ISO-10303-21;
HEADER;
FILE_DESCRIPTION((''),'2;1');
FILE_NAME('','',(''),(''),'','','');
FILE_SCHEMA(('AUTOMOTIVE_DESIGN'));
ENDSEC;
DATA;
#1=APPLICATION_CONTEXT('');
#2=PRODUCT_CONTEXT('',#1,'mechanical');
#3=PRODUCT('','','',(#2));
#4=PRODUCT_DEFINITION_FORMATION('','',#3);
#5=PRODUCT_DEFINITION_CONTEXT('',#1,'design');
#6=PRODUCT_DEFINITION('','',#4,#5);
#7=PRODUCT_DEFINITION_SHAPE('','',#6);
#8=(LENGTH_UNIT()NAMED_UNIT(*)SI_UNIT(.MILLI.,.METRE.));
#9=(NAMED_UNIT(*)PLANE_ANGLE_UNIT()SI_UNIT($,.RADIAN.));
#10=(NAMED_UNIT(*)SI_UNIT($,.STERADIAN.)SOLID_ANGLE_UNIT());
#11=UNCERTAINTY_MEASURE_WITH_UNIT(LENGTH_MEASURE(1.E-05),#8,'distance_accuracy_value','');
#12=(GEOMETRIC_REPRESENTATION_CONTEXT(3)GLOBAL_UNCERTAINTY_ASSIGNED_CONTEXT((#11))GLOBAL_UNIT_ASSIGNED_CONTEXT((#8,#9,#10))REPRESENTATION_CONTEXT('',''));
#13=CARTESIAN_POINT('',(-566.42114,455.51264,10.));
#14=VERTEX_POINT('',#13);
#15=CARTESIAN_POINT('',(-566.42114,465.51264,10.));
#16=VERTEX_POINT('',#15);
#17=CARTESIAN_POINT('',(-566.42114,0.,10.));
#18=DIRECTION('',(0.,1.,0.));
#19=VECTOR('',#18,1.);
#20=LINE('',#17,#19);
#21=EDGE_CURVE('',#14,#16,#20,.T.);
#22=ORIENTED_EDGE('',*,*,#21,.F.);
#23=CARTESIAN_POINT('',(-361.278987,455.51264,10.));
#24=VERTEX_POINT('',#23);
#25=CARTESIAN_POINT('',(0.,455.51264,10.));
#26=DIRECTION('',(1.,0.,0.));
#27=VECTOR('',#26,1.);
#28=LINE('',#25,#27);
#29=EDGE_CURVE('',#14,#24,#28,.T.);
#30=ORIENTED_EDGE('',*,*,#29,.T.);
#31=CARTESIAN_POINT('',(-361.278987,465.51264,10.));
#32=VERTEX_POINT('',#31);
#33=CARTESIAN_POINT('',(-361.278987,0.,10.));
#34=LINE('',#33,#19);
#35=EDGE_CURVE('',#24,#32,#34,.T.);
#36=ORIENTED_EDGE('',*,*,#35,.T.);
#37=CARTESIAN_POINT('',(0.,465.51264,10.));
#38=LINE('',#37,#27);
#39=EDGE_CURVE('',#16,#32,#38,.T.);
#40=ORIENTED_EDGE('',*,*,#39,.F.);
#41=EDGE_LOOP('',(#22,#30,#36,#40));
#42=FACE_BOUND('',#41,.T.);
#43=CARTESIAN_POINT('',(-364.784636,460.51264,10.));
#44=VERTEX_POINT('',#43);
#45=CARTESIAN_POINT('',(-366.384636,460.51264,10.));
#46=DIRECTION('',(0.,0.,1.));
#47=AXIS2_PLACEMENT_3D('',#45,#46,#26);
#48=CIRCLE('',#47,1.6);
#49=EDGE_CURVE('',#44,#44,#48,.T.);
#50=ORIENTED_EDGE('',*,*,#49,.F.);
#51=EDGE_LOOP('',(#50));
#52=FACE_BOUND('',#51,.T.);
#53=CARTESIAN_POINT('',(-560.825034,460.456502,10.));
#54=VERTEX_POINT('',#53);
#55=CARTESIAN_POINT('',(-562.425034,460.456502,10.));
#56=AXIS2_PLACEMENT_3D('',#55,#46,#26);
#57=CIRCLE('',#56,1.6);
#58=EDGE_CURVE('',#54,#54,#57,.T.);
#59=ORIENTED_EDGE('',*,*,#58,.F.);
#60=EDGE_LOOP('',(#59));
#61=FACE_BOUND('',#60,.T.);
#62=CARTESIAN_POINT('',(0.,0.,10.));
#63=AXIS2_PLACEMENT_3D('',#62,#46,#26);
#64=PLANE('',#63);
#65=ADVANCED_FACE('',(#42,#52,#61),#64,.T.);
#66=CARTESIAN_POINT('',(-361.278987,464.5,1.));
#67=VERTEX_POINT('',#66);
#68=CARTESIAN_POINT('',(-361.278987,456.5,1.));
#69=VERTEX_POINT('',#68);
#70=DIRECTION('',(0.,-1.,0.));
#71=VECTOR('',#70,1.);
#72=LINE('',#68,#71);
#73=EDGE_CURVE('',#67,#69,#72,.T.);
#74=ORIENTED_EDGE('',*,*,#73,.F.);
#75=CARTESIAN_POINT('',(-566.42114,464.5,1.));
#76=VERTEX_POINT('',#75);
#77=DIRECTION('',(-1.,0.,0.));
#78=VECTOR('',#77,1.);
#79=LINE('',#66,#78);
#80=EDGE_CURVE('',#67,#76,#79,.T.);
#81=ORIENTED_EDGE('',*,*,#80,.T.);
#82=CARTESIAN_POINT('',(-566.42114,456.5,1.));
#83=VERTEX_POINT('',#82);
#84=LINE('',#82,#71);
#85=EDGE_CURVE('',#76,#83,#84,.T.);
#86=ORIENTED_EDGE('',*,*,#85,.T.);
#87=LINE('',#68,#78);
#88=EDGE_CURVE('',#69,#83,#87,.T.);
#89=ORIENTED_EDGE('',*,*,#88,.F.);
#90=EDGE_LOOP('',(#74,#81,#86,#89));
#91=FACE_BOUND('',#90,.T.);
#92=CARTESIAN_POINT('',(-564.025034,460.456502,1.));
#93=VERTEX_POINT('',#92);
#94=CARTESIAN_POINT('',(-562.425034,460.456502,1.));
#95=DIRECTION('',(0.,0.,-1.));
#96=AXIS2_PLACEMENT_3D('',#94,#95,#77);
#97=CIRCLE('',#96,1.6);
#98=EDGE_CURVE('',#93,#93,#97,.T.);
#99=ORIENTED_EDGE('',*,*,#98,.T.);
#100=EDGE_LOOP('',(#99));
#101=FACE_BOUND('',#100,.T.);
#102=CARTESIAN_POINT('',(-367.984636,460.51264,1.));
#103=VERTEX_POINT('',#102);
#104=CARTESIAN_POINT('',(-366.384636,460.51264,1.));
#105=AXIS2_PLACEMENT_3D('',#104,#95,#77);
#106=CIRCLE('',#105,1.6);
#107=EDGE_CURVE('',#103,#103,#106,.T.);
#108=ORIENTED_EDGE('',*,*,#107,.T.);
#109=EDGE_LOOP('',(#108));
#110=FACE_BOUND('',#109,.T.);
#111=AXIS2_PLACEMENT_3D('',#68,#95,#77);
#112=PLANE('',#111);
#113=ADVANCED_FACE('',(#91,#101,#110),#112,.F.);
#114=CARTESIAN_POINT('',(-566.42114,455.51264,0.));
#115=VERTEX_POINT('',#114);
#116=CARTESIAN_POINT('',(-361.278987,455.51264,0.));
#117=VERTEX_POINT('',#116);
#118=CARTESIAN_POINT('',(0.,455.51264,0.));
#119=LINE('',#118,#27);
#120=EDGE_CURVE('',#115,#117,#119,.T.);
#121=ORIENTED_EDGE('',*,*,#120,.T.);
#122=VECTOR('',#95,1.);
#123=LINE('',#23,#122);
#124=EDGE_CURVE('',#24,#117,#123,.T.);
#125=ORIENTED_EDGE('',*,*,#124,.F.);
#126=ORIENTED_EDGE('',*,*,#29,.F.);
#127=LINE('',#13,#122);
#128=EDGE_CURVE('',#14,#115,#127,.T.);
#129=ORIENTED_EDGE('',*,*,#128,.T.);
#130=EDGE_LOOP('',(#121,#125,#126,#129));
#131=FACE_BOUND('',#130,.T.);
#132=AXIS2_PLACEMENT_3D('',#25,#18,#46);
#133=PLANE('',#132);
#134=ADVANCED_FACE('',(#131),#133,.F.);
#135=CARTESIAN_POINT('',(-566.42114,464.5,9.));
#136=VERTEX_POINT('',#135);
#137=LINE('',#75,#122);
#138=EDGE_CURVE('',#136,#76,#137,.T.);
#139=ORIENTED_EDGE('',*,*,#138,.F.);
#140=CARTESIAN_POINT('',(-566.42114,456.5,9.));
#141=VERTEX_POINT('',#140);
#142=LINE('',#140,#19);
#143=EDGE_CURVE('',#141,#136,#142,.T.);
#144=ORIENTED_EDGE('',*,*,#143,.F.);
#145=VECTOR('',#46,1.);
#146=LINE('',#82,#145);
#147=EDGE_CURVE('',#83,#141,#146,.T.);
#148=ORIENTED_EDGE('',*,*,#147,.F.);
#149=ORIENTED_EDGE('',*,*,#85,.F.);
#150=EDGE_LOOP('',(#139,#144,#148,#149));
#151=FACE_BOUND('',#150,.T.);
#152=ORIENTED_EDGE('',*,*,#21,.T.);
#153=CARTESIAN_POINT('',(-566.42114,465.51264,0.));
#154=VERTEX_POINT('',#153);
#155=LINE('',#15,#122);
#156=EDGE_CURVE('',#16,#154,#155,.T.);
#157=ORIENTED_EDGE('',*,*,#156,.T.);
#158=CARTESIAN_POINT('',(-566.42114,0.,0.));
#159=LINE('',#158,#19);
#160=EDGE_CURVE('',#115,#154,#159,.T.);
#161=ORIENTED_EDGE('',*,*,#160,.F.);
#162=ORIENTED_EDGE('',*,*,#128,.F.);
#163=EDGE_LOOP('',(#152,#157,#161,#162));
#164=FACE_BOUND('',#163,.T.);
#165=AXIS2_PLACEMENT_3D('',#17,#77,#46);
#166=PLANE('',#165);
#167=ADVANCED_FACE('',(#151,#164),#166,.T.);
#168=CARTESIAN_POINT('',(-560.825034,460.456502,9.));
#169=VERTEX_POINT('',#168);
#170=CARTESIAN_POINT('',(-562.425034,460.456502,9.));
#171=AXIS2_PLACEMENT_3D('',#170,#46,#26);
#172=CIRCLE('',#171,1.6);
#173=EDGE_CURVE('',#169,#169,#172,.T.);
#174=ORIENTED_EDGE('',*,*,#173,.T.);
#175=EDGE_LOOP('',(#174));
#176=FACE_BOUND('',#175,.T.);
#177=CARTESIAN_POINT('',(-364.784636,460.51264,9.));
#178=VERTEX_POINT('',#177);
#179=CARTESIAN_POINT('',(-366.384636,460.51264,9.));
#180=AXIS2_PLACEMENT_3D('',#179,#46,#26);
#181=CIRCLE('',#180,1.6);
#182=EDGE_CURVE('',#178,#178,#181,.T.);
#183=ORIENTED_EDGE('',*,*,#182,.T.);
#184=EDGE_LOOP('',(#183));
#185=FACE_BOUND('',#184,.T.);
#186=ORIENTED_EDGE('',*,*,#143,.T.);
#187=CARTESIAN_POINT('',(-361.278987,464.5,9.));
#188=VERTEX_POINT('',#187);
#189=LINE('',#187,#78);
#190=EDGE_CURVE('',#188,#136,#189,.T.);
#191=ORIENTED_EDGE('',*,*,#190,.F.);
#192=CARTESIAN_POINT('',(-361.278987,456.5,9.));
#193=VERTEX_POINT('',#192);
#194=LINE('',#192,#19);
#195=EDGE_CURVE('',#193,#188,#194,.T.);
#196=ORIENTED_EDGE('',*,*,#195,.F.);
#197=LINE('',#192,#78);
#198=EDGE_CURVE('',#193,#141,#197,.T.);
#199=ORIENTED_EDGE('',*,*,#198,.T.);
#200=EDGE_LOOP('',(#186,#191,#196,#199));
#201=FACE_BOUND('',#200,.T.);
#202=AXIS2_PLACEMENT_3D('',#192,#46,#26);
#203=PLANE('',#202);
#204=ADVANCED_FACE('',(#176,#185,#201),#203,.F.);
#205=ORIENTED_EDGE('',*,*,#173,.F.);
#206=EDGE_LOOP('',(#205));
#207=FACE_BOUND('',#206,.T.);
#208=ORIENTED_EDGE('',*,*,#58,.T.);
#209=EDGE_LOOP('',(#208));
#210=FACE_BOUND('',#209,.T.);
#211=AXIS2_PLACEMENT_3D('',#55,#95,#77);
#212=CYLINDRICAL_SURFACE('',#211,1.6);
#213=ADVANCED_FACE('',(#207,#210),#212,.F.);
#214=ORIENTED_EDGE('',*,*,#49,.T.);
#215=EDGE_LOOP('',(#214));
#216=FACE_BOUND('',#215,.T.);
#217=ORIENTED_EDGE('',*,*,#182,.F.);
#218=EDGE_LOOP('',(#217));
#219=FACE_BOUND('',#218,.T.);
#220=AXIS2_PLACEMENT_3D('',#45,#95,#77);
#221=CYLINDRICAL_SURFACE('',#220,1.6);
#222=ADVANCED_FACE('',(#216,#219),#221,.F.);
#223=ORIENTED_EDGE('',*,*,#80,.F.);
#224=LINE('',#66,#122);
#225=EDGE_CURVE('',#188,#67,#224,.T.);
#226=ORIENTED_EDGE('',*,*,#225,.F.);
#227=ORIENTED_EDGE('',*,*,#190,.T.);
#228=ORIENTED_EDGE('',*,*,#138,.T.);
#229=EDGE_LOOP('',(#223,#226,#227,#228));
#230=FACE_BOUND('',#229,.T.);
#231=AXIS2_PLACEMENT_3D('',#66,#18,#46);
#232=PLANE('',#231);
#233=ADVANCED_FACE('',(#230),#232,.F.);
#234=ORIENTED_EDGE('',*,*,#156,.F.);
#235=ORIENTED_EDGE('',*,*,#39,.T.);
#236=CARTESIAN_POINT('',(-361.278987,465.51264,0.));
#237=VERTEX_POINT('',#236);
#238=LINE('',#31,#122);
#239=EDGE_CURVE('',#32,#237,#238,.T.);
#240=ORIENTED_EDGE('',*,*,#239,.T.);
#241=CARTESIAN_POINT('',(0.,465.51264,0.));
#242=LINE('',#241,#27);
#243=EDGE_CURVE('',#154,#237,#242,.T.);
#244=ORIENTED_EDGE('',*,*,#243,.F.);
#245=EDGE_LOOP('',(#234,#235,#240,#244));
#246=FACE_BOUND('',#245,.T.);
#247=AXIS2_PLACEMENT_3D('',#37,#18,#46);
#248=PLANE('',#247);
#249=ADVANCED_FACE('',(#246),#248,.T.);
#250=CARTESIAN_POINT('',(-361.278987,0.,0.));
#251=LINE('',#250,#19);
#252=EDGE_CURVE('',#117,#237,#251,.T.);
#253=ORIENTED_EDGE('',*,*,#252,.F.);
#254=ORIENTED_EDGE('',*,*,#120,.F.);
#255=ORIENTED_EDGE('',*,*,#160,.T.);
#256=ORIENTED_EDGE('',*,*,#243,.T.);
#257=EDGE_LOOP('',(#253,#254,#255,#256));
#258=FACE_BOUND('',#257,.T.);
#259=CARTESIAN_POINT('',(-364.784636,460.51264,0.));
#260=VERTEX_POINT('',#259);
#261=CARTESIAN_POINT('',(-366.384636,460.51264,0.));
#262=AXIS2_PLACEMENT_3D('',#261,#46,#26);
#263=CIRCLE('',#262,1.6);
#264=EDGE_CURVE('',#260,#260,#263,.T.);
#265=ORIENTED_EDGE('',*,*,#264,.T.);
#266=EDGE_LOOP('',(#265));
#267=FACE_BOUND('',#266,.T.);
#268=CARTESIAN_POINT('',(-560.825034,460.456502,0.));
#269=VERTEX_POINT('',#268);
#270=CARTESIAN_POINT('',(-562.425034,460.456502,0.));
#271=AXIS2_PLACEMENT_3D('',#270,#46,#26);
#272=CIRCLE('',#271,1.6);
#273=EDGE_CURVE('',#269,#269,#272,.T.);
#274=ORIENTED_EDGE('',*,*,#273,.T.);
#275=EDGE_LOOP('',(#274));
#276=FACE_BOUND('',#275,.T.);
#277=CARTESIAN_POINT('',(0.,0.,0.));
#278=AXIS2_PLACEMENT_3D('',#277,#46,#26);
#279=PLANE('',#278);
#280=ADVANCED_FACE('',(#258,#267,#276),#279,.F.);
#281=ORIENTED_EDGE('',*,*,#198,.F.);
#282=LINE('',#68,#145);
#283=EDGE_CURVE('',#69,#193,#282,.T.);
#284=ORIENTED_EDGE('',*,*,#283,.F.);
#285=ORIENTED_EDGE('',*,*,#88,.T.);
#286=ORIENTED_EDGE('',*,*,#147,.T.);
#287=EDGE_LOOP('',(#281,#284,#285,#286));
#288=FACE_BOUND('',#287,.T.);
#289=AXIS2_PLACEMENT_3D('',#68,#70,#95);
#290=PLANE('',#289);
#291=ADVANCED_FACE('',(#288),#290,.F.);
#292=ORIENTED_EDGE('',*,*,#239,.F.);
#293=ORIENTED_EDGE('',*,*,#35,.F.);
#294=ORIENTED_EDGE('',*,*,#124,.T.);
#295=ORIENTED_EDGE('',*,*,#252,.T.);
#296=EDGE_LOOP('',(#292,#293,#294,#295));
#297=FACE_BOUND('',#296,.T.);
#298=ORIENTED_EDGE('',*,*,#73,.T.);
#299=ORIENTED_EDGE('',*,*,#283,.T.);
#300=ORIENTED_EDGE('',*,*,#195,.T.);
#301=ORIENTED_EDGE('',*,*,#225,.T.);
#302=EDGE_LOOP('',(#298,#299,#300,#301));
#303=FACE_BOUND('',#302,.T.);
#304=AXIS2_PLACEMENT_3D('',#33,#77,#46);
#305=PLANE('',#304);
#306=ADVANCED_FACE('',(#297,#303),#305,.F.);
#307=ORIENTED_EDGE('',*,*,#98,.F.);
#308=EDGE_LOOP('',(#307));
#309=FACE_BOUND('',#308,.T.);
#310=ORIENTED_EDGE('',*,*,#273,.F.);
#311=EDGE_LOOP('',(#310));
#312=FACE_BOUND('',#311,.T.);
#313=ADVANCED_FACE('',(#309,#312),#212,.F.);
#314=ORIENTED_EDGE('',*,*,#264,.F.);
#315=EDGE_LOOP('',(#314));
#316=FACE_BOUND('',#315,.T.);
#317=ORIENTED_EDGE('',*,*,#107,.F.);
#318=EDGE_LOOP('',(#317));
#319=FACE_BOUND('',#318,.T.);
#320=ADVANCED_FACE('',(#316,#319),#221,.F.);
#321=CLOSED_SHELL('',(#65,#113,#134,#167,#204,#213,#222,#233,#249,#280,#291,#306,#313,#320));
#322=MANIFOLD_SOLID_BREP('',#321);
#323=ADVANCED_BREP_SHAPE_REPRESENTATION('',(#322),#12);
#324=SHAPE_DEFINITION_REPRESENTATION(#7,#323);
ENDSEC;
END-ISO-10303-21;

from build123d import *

# Parameters (mm, degrees)
EXTRUDE_1_OUTLINE_W = 205.142153086
EXTRUDE_1_OUTLINE_H = 10
EXTRUDE_1_OUTLINE_R = 1.6
EXTRUDE_1_DEPTH     = 10
SKETCH_2_W          = 8
SKETCH_2_H          = 8
CUT_EXTRUDE_1_DEPTH = 509.807744608


# Read off the part's stored shape, not the designer's step: ﾎﾞｽ - 押し出し1
with BuildPart() as part:
    # ﾎﾞｽ - 押し出し1 outline → ﾎﾞｽ - 押し出し1 (new body)
    with BuildSketch(Plane.XY):
        with Locations((-463.850063806, 460.512640001)):
            Rectangle(EXTRUDE_1_OUTLINE_W, EXTRUDE_1_OUTLINE_H)
        with Locations((-562.425033807, 460.4565023)):
            Circle(EXTRUDE_1_OUTLINE_R, mode=Mode.SUBTRACT)
        with Locations((-366.384636001, 460.512640001)):
            Circle(EXTRUDE_1_OUTLINE_R, mode=Mode.SUBTRACT)
    extrude(amount=EXTRUDE_1_DEPTH)

    # ｽｹｯﾁ2 → ｶｯﾄ - 押し出し1 (cut, through all)
    with BuildSketch(Plane.ZY.offset(566.421140349)):
        with Locations((5, 460.5)):
            Rectangle(SKETCH_2_W, SKETCH_2_H)
    extrude(amount=-CUT_EXTRUDE_1_DEPTH, mode=Mode.SUBTRACT)


solid = part.part
